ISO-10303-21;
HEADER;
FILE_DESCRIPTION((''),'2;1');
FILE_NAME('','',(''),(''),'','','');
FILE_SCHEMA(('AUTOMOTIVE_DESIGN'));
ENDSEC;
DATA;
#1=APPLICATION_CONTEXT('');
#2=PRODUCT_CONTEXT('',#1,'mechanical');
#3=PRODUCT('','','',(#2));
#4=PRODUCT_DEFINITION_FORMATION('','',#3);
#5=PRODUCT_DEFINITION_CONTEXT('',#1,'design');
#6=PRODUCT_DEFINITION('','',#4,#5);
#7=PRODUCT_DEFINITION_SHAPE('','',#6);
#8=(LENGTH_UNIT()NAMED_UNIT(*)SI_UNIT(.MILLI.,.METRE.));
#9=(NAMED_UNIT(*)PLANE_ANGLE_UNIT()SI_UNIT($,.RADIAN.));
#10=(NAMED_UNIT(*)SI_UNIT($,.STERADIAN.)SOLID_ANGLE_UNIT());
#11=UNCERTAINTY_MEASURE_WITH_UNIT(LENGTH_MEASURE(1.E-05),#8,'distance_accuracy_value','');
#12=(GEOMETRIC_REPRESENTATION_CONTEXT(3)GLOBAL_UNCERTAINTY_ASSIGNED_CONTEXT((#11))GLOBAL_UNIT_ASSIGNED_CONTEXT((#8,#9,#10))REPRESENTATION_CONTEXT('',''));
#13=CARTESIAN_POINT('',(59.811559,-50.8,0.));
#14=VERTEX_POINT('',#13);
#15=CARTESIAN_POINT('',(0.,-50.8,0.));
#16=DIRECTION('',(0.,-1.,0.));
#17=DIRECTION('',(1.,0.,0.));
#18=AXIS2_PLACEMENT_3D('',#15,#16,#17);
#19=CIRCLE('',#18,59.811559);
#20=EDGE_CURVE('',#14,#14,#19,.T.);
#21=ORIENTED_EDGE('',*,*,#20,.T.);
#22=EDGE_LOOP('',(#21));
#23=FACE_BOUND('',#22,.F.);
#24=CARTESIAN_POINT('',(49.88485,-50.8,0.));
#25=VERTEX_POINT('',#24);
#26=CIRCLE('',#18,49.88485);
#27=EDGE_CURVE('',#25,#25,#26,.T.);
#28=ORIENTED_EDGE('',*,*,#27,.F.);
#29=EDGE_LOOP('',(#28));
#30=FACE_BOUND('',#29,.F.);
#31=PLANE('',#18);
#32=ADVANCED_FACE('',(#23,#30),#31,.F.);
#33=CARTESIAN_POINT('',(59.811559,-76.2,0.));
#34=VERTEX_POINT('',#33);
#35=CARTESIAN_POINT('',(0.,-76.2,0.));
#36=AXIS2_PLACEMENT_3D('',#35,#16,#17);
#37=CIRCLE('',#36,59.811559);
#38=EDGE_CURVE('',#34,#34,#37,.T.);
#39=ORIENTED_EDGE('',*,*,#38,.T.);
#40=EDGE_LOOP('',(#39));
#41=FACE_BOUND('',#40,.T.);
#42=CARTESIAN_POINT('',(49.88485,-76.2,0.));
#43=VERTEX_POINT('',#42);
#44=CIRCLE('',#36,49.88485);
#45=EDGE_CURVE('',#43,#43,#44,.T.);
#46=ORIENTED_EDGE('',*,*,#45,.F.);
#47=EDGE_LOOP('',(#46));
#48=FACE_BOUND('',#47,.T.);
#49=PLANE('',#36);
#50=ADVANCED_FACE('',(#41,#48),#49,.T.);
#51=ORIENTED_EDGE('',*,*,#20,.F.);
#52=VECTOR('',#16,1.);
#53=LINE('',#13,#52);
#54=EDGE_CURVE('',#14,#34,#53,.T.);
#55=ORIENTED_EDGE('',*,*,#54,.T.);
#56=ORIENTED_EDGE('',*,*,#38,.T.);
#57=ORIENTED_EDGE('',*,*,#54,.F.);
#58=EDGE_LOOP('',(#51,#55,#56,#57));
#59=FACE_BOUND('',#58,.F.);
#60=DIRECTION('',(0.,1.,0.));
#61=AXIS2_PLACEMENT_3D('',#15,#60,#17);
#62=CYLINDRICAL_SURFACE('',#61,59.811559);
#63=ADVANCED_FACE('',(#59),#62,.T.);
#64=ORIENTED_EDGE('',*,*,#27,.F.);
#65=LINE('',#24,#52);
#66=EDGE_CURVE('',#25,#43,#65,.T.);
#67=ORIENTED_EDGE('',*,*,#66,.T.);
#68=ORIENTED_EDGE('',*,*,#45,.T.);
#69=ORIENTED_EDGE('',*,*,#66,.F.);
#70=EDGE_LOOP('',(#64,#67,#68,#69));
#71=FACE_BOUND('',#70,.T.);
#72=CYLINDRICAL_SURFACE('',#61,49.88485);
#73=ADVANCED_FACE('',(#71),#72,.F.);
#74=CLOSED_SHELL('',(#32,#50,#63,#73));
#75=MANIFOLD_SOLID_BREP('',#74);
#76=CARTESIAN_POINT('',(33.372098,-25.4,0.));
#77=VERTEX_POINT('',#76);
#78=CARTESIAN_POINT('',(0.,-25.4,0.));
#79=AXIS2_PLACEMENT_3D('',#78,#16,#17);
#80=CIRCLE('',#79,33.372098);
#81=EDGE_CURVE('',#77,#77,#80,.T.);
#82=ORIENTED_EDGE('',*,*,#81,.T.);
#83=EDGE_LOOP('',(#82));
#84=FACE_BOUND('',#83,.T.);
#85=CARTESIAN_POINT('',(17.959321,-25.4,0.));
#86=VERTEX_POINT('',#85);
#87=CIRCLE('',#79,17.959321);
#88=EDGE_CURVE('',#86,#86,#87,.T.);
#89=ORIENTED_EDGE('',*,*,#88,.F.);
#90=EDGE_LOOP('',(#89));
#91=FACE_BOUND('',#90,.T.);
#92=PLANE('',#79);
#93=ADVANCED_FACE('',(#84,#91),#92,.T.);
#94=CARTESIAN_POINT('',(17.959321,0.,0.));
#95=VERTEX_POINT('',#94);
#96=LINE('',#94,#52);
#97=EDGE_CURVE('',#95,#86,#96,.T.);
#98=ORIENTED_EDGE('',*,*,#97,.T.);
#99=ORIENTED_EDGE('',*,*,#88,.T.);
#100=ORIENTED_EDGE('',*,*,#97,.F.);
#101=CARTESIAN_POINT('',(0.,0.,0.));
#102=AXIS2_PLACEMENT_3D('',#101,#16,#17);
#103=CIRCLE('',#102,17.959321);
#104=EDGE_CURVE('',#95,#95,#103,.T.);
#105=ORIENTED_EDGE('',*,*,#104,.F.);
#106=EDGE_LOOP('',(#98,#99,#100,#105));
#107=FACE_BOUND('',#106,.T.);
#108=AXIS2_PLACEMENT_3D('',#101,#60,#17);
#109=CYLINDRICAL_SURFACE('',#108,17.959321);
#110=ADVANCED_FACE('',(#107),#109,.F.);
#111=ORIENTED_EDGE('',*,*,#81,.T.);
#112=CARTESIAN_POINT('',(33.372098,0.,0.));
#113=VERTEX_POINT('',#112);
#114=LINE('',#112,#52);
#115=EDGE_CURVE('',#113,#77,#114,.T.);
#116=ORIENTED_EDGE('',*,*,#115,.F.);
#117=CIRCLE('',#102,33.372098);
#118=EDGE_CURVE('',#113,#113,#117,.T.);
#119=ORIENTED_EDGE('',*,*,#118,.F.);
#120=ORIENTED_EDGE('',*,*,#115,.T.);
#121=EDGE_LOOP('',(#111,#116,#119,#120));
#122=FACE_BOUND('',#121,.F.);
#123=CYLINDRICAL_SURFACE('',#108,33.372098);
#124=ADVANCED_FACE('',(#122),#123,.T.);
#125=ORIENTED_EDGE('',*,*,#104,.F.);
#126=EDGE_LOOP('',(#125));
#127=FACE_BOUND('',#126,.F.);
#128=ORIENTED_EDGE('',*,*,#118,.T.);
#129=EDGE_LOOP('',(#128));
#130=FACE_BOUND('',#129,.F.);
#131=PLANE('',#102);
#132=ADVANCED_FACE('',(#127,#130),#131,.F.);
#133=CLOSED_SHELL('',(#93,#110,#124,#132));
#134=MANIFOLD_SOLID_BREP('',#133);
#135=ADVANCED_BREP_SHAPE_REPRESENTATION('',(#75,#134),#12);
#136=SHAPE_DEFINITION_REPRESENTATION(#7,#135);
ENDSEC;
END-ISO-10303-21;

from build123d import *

# Parameters (mm, degrees)
F0_R     = 33.3720981505
F0_R_2   = 17.9593209069
F2_DEPTH = 25.4
F3_R     = 59.8115589421
F3_R_2   = 49.8848504809
F4_DEPTH = 25.4


# Not quite as in the source:
# - the program builds the solid bodies; features that only make, move or delete a surface that nothing else refers to are left out


with BuildPart() as f2:
    # F0 (on Front) → F2 (new body)
    with BuildSketch(Plane.XZ):
        Circle(F0_R)
        Circle(F0_R_2, mode=Mode.SUBTRACT)
    extrude(amount=F2_DEPTH)


with BuildPart() as f4:
    # F3 (on offset) → F4 (new body)
    with BuildSketch(Plane.XZ.offset(50.8)):
        Circle(F3_R)
        Circle(F3_R_2, mode=Mode.SUBTRACT)
    extrude(amount=F4_DEPTH)


solid = Compound([f2.part, f4.part])
